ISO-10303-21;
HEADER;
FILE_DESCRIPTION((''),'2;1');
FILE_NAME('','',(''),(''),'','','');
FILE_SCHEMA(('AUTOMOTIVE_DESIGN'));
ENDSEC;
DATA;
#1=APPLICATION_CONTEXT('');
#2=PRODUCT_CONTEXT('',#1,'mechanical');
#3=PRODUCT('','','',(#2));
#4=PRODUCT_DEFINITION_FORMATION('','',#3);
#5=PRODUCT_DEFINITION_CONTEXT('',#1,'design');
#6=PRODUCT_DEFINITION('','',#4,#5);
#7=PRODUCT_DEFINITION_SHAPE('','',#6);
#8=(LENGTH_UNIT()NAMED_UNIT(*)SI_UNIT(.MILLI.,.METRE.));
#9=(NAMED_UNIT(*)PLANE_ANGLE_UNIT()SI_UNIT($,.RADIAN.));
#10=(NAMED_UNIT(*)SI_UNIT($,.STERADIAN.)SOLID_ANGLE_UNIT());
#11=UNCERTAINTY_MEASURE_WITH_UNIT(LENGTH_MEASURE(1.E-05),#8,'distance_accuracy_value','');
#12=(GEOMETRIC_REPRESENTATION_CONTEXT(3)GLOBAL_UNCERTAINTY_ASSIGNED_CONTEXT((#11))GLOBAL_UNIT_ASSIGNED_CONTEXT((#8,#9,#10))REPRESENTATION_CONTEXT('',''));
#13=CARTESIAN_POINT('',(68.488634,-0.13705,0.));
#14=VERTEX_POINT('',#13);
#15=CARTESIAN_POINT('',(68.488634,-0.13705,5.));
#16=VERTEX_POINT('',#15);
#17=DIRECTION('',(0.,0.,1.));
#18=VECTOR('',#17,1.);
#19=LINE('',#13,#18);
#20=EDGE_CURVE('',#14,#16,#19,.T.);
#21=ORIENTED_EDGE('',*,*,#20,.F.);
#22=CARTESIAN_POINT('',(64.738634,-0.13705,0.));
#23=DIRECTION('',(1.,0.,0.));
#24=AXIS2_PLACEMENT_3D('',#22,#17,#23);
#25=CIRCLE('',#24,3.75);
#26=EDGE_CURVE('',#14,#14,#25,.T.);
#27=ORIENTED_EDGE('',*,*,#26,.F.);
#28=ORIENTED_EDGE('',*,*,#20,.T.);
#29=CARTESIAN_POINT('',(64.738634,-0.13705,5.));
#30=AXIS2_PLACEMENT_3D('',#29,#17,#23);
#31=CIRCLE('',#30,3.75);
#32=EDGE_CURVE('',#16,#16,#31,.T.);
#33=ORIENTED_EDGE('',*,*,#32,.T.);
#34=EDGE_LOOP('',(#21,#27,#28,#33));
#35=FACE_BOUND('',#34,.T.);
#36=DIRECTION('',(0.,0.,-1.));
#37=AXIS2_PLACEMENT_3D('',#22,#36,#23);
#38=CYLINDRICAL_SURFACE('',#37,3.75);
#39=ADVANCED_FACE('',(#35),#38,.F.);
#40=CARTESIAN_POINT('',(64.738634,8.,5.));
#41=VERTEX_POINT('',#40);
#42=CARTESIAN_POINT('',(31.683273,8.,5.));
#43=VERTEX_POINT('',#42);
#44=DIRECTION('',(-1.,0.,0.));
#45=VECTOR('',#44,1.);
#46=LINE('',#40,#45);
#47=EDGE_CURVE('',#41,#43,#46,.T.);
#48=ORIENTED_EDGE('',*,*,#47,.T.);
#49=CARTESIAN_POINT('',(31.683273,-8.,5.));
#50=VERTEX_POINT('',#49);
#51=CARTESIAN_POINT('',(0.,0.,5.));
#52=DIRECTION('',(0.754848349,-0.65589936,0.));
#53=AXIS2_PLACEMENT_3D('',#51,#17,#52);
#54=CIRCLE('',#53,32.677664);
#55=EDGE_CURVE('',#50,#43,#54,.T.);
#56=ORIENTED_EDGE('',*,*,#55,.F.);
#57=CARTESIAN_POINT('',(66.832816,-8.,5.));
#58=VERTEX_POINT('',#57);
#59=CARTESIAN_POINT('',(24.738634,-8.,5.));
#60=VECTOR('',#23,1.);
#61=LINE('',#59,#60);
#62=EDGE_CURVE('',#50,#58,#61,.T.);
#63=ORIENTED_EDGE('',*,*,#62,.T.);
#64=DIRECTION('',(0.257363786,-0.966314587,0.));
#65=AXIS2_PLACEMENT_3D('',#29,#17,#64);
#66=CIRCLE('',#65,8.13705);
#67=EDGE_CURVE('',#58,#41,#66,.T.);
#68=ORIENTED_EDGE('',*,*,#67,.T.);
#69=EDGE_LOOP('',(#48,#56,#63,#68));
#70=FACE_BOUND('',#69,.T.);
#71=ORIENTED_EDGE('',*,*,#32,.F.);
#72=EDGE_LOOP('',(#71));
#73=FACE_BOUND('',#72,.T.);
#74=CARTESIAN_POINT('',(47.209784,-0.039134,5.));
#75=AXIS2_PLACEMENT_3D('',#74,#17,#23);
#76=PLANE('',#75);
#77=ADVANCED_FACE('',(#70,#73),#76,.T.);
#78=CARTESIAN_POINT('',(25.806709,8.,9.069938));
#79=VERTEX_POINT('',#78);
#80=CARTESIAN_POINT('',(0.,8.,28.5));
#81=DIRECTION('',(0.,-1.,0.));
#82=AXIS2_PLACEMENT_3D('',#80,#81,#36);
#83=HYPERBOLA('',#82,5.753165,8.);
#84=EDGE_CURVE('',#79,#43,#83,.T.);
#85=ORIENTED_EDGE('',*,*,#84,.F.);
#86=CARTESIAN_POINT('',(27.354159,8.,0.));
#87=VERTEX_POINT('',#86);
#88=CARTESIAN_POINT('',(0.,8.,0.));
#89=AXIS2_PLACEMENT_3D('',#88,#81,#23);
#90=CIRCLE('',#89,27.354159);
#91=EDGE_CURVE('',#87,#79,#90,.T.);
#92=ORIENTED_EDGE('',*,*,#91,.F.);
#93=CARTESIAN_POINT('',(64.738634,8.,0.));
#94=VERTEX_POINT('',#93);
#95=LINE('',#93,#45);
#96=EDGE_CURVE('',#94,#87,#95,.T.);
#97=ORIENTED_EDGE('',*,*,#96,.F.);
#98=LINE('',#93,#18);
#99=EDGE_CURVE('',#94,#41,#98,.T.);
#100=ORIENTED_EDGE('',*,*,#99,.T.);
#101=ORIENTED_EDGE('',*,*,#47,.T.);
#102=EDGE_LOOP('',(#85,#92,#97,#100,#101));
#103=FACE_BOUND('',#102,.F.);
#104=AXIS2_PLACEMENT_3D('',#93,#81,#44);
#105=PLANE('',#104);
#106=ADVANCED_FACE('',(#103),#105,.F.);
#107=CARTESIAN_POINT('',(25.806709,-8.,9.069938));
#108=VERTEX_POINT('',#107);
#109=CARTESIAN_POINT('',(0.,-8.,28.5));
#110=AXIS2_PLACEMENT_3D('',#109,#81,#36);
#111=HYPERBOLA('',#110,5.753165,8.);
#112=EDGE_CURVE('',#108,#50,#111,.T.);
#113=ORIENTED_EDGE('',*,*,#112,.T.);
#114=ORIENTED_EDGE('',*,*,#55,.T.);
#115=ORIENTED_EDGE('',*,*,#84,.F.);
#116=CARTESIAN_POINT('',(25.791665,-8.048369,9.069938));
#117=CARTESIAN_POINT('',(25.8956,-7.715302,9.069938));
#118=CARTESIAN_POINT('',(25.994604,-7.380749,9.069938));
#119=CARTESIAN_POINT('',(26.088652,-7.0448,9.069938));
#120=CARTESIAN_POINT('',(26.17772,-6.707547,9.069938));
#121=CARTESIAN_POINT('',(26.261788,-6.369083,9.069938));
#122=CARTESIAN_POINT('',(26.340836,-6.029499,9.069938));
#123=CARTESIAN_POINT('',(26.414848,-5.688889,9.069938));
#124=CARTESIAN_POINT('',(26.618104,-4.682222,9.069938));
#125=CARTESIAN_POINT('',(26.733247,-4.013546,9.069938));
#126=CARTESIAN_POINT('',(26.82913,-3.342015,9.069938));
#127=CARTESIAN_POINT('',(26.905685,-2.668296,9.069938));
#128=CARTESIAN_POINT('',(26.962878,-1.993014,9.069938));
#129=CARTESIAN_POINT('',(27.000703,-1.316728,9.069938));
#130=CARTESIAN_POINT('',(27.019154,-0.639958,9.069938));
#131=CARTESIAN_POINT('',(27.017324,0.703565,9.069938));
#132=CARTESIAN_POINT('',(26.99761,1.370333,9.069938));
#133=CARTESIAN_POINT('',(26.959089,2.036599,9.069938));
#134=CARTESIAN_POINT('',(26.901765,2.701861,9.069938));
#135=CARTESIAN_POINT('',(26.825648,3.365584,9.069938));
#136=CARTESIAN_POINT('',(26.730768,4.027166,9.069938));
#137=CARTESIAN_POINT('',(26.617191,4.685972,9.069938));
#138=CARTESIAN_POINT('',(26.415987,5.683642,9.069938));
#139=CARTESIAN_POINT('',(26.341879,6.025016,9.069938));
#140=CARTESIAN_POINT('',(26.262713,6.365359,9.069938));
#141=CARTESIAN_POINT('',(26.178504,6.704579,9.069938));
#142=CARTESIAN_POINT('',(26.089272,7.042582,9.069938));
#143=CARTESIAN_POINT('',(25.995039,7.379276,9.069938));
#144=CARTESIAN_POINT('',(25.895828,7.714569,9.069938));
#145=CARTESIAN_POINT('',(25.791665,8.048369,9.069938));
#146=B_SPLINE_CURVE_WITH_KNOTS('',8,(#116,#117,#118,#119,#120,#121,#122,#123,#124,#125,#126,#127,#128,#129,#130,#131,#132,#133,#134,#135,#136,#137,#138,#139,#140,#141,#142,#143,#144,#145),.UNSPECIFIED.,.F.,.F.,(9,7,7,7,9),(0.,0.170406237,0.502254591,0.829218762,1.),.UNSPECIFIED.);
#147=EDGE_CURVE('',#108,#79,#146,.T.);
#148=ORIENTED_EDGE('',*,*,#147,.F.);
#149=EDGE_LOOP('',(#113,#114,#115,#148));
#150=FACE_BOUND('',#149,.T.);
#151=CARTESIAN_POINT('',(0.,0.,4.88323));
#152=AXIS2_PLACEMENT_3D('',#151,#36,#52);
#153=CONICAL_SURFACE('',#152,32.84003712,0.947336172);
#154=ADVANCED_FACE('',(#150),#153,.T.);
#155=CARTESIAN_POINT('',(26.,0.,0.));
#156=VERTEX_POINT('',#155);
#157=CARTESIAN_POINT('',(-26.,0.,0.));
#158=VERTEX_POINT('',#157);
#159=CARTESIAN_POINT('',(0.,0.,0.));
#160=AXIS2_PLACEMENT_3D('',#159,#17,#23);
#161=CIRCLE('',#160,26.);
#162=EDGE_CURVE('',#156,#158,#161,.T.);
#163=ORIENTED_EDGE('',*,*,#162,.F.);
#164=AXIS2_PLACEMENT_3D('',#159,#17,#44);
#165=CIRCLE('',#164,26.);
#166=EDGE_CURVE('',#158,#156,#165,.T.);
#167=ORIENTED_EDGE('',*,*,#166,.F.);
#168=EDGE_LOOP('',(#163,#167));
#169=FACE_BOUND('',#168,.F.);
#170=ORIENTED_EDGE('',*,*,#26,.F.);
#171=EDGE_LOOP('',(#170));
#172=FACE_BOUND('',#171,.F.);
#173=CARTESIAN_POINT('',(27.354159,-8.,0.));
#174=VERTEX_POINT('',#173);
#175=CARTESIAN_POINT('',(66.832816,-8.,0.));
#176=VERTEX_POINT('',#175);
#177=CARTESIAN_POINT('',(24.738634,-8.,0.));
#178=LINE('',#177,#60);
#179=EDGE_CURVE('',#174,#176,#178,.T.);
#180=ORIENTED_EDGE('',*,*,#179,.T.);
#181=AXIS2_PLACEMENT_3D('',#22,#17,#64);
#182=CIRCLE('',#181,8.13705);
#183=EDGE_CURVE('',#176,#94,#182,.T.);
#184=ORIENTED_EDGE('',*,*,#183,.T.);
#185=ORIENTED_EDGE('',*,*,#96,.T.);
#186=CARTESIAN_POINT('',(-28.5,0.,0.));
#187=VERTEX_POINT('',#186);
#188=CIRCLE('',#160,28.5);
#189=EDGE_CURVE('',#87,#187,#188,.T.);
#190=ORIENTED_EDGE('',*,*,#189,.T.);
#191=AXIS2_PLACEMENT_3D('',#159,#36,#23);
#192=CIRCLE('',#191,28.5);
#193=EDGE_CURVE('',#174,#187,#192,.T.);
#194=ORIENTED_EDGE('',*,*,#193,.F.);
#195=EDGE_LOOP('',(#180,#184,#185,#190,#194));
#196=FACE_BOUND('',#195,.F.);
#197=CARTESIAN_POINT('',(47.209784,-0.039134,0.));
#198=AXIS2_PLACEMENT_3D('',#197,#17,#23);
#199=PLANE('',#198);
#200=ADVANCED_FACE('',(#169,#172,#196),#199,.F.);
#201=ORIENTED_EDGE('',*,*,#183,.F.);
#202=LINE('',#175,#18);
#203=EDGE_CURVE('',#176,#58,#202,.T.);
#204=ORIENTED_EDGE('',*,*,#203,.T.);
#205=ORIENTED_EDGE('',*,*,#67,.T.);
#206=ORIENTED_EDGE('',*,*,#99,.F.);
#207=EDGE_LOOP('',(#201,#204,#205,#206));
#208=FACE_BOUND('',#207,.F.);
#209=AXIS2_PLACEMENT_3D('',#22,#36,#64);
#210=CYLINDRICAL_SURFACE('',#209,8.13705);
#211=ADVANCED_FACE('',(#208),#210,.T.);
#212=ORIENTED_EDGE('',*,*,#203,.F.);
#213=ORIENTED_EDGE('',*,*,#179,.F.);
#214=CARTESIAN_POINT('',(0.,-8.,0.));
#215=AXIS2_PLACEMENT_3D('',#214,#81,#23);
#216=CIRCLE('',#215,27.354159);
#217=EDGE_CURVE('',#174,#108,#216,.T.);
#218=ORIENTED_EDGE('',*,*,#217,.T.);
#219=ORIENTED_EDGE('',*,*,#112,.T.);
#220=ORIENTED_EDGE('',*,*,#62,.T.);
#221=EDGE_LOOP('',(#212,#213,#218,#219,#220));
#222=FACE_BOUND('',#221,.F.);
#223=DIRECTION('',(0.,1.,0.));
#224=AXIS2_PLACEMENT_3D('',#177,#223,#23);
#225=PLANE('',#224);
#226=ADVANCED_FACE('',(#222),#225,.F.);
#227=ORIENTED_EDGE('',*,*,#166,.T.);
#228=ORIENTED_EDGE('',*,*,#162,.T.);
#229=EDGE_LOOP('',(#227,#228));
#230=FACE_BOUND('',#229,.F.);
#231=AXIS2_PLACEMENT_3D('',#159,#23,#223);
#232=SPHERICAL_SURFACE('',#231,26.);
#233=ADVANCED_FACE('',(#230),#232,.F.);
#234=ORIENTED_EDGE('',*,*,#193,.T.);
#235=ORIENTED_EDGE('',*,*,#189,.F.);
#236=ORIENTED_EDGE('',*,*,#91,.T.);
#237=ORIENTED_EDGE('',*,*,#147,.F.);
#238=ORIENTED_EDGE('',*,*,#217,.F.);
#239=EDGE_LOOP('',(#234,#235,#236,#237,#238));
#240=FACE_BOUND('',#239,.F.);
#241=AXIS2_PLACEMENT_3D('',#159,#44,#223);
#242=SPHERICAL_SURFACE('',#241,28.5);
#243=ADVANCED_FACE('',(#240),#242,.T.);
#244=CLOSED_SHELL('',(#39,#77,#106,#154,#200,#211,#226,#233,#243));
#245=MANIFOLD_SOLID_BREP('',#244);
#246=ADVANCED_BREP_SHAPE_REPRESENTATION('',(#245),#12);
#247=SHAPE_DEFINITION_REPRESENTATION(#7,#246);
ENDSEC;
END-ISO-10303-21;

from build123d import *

# Parameters (mm, degrees)
F1_ANGLE    = 180
F2_R        = 3.75
F3_DEPTH    = 5
F4_T4_ANGLE = 81.9757587875


# Not quite as in the source:
# - a fillet or chamfer that OpenCascade refuses, or shapes differently, is made with other operations: its cross-section is extruded or revolved along the edge and cut away or added
# - a feature names something its author has since deleted; it is built from what else it names


with BuildPart() as f1:
    # F0 (on Top) → F1 (revolve)
    with BuildSketch(Plane.XY):
        with BuildLine():
            ThreePointArc((-26, 0), (0, 26), (26, 0))
            Line((26, 0), (28.5, 0))
            ThreePointArc((28.5, 0), (0, 28.5), (-28.5, 0))
            Line((-28.5, 0), (-26, 0))
        make_face()
    revolve(axis=Axis((0, 0, 0), (1, 0, 0)), revolution_arc=F1_ANGLE)

    # F2 (on Top) → F3 (join)
    with BuildSketch(Plane.XY):
        with BuildLine():
            Line((64.7386337537, 8), (24.7386337537, 8))
            ThreePointArc((24.7386337537, 8), (25.6827225737, 4.0494149209), (26, 0))
            ThreePointArc((26, 0), (25.6827225737, -4.0494149209), (24.7386337537, -8))
            Line((24.7386337537, -8), (66.83281573, -8))
            ThreePointArc((66.83281573, -8), (72.8068677326, 0.918971944), (64.7386337537, 8))
        make_face()
        with Locations((64.7386337537, -0.1370499422)):
            Circle(F2_R, mode=Mode.SUBTRACT)
    extrude(amount=F3_DEPTH)

    # F4: chamfer of 5 on 1 edges, made by hand


with BuildPart() as f4_tool2:
    # F4_s3 → F4_t4 (revolve)
    with BuildSketch(Plane(origin=(0, 0, 0), x_dir=(0, 0, 1), z_dir=(-0.6558993597, -0.754848349, 0))):
        with BuildLine():
            Line((4.8832304356, -32.8400371197), (9.1867076398, -26.8558845985))
            Line((9.1867076398, -26.8558845985), (9.1548832957, -26.761083696))
            ThreePointArc((9.1548832957, -26.761083696), (7.1037600734, -27.4972106371), (4.9824561404, -27.9595266557))
            Line((4.9824561404, -27.9595266557), (4.9, -28.0579756932))
            ThreePointArc((4.9, -28.0579756932), (4.9, -30.4490064064), (4.7832304356, -32.8400371197))
            Line((4.7832304356, -32.8400371197), (4.8832304356, -32.8400371197))
        make_face()
    revolve(axis=Axis((0, 0, 5), (0, 0, 1)), revolution_arc=F4_T4_ANGLE)

    split(bisect_by=Plane.XZ.offset(8), keep=Keep.BOTTOM)

    split(bisect_by=Plane.XZ.offset(-8), keep=Keep.TOP)


with BuildPart() as f1_1:
    add(f1.part)

    # F4_t1: union F4_tool2
    add(f4_tool2.part)


solid = f1_1.part
